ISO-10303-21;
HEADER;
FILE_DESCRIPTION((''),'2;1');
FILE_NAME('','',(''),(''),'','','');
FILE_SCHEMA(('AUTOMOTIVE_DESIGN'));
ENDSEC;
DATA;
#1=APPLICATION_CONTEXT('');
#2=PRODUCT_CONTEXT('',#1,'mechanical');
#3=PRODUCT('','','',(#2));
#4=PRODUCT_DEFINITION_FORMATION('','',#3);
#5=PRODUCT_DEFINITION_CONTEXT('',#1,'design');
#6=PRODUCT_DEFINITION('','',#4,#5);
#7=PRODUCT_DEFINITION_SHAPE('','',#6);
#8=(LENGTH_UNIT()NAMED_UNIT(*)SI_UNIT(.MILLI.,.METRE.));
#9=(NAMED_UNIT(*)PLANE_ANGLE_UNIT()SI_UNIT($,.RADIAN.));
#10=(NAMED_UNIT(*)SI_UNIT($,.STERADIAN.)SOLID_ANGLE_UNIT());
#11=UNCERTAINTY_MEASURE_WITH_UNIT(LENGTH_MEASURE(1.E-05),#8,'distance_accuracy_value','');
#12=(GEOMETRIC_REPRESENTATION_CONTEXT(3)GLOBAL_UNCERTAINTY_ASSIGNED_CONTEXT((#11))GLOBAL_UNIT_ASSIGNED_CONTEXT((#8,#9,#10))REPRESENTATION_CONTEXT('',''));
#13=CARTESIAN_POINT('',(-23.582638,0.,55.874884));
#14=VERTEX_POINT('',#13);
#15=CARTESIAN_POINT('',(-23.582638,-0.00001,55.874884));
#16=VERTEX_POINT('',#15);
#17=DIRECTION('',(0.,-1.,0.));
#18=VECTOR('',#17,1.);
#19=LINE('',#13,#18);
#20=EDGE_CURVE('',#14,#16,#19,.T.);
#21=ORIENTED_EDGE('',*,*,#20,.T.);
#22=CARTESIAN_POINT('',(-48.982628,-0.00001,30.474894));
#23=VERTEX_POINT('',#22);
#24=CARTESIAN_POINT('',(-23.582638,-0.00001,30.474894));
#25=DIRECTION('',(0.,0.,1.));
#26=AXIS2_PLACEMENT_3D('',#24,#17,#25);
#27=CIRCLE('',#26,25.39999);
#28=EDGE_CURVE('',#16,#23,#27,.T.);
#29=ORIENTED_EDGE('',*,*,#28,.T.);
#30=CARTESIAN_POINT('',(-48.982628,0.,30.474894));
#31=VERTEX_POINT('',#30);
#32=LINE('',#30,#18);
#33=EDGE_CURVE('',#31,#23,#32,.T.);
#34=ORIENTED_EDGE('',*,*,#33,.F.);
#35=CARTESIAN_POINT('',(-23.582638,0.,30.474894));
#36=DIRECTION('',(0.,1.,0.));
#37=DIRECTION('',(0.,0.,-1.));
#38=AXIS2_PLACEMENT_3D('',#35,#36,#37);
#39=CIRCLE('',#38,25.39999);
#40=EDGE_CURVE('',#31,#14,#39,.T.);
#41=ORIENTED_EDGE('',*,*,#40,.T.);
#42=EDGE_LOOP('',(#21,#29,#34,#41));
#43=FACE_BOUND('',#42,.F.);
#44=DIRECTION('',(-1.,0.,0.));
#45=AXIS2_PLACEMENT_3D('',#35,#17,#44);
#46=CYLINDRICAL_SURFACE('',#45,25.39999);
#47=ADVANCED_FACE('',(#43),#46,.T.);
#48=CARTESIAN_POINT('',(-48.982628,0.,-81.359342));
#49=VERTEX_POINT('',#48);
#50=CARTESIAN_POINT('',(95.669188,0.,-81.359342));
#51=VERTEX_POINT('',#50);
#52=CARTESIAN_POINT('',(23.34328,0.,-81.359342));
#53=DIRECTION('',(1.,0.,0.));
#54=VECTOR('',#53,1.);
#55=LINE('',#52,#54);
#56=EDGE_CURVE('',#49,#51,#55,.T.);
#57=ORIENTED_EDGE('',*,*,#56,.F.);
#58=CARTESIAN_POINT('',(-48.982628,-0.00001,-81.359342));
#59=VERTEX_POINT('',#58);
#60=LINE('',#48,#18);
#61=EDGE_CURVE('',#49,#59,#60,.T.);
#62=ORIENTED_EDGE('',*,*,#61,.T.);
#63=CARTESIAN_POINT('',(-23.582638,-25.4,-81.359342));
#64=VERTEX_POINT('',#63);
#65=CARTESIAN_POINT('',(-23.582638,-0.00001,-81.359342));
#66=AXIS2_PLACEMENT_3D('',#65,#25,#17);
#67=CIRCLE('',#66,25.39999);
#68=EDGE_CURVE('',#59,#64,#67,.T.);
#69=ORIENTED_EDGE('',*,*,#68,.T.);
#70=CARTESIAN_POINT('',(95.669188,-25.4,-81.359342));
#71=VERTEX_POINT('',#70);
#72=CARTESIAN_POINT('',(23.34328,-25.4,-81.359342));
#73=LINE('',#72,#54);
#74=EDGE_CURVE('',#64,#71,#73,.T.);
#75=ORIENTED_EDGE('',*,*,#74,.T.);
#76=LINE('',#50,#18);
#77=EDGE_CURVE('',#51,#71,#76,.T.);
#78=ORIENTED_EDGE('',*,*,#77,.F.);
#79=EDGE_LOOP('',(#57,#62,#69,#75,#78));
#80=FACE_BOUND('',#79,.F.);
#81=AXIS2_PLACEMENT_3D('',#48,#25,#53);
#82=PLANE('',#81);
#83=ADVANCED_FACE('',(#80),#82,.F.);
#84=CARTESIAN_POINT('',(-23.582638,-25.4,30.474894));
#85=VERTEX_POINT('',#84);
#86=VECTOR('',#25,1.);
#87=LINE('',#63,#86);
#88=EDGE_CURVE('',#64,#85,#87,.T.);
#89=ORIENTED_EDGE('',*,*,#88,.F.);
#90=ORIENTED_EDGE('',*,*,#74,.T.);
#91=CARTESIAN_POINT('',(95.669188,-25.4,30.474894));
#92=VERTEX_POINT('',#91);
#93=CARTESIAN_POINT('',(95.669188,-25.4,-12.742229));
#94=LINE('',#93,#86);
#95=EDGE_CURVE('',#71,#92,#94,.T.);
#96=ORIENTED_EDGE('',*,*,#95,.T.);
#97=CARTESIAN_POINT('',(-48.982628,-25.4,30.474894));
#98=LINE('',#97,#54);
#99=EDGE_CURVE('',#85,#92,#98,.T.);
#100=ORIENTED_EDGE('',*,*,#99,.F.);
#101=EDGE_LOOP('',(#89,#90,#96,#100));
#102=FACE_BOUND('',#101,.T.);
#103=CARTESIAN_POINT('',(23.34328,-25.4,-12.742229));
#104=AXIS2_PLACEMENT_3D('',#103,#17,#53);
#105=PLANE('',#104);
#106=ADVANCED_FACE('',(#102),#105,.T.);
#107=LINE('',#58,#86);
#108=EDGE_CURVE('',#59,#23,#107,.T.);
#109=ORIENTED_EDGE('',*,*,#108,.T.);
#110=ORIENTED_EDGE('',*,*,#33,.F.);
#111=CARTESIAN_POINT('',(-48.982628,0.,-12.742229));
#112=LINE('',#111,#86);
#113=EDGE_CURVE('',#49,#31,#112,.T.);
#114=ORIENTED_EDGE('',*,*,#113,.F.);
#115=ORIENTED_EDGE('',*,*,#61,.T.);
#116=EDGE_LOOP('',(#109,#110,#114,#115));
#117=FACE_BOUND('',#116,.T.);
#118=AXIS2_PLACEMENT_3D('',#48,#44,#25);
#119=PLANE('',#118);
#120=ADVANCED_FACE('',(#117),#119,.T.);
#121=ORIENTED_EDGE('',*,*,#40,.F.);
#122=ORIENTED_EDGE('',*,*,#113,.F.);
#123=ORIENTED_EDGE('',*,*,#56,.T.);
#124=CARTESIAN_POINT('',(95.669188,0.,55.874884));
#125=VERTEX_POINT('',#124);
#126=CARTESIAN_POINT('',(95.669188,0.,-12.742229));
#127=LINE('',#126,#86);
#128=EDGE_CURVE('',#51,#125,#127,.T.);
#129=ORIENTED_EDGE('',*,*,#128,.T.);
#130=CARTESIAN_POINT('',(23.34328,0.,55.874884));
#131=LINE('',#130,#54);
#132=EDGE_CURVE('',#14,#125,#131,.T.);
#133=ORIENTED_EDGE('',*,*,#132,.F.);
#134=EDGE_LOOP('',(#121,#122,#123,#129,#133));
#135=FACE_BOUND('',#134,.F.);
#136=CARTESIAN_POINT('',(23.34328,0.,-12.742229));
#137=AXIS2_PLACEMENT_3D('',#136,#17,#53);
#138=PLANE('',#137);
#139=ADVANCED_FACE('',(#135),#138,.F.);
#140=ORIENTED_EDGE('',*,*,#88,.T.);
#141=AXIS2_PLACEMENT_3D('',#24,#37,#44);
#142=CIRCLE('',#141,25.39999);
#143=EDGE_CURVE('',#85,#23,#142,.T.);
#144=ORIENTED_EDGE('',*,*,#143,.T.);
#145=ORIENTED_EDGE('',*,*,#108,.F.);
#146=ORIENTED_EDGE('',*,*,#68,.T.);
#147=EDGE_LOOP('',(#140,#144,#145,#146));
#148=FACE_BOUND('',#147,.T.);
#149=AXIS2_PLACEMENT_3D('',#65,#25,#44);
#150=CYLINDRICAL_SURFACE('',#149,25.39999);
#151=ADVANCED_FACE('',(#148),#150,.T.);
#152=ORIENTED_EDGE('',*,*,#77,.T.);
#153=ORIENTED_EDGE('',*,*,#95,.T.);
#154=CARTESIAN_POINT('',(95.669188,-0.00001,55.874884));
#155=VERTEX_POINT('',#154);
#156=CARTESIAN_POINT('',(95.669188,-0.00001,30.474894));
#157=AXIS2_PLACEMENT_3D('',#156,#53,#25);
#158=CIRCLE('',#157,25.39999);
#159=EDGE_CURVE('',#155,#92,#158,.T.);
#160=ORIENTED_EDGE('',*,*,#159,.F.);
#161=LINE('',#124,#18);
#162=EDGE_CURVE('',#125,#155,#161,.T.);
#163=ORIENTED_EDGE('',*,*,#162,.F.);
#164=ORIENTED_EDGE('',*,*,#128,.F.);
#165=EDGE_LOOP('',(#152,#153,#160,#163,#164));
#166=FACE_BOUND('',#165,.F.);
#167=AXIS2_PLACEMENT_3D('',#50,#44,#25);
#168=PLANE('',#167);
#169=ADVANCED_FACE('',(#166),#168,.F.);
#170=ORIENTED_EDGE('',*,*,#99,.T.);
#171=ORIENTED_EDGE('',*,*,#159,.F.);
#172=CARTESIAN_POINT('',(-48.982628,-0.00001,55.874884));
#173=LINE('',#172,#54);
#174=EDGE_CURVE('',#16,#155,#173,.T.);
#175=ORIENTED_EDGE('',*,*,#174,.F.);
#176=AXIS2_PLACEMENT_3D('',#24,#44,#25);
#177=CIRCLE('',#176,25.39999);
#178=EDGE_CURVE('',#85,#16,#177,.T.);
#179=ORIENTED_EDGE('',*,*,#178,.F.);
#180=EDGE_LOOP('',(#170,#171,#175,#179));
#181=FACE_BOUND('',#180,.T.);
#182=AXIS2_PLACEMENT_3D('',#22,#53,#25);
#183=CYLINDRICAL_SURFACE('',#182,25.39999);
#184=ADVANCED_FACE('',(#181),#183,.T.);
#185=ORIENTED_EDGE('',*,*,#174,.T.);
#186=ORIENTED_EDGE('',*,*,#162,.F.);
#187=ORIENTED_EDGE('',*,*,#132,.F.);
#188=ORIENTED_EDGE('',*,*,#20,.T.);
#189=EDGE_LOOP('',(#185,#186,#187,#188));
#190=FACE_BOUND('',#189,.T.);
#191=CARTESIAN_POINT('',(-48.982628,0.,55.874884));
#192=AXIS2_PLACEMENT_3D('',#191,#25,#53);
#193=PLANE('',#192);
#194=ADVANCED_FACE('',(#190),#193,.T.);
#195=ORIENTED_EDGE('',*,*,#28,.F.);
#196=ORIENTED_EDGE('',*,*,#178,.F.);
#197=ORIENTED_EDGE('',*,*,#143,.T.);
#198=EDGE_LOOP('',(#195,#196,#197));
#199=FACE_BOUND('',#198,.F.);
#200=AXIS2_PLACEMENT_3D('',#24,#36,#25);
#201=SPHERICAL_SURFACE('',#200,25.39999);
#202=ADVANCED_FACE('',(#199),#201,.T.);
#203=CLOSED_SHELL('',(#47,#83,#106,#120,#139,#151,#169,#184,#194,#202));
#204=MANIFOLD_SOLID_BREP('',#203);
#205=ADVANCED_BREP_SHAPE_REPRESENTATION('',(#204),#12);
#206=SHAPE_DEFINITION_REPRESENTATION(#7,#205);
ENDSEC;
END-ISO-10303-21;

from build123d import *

# Parameters (mm, degrees)
F0_W     = 144.6518152952
F0_H     = 137.2342258692
F2_DEPTH = 25.4
F1_R     = 25.39999


# Not quite as in the source:
# - a fillet or chamfer is up to 0.001 mm smaller than in the source, because OpenCascade refuses the exact size


with BuildPart() as f2:
    # F0 (on Front) → F2 (new body)
    with BuildSketch(Plane.XZ):
        with Locations((23.3432799578, -12.742228806)):
            Rectangle(F0_W, F0_H)
    extrude(amount=F2_DEPTH)

    # F1 (radius 25.4 in the source; OpenCascade refuses exactly that, so slightly less here)
    f1_edges = [f2.edges().sort_by_distance(p)[0] for p in [
        (-48.982628, -12.7, 55.874884),
        (23.34328, -25.4, 55.874884),
        (-48.982628, -25.4, -12.742229),
    ]]
    fillet(f1_edges, radius=F1_R)


solid = f2.part
